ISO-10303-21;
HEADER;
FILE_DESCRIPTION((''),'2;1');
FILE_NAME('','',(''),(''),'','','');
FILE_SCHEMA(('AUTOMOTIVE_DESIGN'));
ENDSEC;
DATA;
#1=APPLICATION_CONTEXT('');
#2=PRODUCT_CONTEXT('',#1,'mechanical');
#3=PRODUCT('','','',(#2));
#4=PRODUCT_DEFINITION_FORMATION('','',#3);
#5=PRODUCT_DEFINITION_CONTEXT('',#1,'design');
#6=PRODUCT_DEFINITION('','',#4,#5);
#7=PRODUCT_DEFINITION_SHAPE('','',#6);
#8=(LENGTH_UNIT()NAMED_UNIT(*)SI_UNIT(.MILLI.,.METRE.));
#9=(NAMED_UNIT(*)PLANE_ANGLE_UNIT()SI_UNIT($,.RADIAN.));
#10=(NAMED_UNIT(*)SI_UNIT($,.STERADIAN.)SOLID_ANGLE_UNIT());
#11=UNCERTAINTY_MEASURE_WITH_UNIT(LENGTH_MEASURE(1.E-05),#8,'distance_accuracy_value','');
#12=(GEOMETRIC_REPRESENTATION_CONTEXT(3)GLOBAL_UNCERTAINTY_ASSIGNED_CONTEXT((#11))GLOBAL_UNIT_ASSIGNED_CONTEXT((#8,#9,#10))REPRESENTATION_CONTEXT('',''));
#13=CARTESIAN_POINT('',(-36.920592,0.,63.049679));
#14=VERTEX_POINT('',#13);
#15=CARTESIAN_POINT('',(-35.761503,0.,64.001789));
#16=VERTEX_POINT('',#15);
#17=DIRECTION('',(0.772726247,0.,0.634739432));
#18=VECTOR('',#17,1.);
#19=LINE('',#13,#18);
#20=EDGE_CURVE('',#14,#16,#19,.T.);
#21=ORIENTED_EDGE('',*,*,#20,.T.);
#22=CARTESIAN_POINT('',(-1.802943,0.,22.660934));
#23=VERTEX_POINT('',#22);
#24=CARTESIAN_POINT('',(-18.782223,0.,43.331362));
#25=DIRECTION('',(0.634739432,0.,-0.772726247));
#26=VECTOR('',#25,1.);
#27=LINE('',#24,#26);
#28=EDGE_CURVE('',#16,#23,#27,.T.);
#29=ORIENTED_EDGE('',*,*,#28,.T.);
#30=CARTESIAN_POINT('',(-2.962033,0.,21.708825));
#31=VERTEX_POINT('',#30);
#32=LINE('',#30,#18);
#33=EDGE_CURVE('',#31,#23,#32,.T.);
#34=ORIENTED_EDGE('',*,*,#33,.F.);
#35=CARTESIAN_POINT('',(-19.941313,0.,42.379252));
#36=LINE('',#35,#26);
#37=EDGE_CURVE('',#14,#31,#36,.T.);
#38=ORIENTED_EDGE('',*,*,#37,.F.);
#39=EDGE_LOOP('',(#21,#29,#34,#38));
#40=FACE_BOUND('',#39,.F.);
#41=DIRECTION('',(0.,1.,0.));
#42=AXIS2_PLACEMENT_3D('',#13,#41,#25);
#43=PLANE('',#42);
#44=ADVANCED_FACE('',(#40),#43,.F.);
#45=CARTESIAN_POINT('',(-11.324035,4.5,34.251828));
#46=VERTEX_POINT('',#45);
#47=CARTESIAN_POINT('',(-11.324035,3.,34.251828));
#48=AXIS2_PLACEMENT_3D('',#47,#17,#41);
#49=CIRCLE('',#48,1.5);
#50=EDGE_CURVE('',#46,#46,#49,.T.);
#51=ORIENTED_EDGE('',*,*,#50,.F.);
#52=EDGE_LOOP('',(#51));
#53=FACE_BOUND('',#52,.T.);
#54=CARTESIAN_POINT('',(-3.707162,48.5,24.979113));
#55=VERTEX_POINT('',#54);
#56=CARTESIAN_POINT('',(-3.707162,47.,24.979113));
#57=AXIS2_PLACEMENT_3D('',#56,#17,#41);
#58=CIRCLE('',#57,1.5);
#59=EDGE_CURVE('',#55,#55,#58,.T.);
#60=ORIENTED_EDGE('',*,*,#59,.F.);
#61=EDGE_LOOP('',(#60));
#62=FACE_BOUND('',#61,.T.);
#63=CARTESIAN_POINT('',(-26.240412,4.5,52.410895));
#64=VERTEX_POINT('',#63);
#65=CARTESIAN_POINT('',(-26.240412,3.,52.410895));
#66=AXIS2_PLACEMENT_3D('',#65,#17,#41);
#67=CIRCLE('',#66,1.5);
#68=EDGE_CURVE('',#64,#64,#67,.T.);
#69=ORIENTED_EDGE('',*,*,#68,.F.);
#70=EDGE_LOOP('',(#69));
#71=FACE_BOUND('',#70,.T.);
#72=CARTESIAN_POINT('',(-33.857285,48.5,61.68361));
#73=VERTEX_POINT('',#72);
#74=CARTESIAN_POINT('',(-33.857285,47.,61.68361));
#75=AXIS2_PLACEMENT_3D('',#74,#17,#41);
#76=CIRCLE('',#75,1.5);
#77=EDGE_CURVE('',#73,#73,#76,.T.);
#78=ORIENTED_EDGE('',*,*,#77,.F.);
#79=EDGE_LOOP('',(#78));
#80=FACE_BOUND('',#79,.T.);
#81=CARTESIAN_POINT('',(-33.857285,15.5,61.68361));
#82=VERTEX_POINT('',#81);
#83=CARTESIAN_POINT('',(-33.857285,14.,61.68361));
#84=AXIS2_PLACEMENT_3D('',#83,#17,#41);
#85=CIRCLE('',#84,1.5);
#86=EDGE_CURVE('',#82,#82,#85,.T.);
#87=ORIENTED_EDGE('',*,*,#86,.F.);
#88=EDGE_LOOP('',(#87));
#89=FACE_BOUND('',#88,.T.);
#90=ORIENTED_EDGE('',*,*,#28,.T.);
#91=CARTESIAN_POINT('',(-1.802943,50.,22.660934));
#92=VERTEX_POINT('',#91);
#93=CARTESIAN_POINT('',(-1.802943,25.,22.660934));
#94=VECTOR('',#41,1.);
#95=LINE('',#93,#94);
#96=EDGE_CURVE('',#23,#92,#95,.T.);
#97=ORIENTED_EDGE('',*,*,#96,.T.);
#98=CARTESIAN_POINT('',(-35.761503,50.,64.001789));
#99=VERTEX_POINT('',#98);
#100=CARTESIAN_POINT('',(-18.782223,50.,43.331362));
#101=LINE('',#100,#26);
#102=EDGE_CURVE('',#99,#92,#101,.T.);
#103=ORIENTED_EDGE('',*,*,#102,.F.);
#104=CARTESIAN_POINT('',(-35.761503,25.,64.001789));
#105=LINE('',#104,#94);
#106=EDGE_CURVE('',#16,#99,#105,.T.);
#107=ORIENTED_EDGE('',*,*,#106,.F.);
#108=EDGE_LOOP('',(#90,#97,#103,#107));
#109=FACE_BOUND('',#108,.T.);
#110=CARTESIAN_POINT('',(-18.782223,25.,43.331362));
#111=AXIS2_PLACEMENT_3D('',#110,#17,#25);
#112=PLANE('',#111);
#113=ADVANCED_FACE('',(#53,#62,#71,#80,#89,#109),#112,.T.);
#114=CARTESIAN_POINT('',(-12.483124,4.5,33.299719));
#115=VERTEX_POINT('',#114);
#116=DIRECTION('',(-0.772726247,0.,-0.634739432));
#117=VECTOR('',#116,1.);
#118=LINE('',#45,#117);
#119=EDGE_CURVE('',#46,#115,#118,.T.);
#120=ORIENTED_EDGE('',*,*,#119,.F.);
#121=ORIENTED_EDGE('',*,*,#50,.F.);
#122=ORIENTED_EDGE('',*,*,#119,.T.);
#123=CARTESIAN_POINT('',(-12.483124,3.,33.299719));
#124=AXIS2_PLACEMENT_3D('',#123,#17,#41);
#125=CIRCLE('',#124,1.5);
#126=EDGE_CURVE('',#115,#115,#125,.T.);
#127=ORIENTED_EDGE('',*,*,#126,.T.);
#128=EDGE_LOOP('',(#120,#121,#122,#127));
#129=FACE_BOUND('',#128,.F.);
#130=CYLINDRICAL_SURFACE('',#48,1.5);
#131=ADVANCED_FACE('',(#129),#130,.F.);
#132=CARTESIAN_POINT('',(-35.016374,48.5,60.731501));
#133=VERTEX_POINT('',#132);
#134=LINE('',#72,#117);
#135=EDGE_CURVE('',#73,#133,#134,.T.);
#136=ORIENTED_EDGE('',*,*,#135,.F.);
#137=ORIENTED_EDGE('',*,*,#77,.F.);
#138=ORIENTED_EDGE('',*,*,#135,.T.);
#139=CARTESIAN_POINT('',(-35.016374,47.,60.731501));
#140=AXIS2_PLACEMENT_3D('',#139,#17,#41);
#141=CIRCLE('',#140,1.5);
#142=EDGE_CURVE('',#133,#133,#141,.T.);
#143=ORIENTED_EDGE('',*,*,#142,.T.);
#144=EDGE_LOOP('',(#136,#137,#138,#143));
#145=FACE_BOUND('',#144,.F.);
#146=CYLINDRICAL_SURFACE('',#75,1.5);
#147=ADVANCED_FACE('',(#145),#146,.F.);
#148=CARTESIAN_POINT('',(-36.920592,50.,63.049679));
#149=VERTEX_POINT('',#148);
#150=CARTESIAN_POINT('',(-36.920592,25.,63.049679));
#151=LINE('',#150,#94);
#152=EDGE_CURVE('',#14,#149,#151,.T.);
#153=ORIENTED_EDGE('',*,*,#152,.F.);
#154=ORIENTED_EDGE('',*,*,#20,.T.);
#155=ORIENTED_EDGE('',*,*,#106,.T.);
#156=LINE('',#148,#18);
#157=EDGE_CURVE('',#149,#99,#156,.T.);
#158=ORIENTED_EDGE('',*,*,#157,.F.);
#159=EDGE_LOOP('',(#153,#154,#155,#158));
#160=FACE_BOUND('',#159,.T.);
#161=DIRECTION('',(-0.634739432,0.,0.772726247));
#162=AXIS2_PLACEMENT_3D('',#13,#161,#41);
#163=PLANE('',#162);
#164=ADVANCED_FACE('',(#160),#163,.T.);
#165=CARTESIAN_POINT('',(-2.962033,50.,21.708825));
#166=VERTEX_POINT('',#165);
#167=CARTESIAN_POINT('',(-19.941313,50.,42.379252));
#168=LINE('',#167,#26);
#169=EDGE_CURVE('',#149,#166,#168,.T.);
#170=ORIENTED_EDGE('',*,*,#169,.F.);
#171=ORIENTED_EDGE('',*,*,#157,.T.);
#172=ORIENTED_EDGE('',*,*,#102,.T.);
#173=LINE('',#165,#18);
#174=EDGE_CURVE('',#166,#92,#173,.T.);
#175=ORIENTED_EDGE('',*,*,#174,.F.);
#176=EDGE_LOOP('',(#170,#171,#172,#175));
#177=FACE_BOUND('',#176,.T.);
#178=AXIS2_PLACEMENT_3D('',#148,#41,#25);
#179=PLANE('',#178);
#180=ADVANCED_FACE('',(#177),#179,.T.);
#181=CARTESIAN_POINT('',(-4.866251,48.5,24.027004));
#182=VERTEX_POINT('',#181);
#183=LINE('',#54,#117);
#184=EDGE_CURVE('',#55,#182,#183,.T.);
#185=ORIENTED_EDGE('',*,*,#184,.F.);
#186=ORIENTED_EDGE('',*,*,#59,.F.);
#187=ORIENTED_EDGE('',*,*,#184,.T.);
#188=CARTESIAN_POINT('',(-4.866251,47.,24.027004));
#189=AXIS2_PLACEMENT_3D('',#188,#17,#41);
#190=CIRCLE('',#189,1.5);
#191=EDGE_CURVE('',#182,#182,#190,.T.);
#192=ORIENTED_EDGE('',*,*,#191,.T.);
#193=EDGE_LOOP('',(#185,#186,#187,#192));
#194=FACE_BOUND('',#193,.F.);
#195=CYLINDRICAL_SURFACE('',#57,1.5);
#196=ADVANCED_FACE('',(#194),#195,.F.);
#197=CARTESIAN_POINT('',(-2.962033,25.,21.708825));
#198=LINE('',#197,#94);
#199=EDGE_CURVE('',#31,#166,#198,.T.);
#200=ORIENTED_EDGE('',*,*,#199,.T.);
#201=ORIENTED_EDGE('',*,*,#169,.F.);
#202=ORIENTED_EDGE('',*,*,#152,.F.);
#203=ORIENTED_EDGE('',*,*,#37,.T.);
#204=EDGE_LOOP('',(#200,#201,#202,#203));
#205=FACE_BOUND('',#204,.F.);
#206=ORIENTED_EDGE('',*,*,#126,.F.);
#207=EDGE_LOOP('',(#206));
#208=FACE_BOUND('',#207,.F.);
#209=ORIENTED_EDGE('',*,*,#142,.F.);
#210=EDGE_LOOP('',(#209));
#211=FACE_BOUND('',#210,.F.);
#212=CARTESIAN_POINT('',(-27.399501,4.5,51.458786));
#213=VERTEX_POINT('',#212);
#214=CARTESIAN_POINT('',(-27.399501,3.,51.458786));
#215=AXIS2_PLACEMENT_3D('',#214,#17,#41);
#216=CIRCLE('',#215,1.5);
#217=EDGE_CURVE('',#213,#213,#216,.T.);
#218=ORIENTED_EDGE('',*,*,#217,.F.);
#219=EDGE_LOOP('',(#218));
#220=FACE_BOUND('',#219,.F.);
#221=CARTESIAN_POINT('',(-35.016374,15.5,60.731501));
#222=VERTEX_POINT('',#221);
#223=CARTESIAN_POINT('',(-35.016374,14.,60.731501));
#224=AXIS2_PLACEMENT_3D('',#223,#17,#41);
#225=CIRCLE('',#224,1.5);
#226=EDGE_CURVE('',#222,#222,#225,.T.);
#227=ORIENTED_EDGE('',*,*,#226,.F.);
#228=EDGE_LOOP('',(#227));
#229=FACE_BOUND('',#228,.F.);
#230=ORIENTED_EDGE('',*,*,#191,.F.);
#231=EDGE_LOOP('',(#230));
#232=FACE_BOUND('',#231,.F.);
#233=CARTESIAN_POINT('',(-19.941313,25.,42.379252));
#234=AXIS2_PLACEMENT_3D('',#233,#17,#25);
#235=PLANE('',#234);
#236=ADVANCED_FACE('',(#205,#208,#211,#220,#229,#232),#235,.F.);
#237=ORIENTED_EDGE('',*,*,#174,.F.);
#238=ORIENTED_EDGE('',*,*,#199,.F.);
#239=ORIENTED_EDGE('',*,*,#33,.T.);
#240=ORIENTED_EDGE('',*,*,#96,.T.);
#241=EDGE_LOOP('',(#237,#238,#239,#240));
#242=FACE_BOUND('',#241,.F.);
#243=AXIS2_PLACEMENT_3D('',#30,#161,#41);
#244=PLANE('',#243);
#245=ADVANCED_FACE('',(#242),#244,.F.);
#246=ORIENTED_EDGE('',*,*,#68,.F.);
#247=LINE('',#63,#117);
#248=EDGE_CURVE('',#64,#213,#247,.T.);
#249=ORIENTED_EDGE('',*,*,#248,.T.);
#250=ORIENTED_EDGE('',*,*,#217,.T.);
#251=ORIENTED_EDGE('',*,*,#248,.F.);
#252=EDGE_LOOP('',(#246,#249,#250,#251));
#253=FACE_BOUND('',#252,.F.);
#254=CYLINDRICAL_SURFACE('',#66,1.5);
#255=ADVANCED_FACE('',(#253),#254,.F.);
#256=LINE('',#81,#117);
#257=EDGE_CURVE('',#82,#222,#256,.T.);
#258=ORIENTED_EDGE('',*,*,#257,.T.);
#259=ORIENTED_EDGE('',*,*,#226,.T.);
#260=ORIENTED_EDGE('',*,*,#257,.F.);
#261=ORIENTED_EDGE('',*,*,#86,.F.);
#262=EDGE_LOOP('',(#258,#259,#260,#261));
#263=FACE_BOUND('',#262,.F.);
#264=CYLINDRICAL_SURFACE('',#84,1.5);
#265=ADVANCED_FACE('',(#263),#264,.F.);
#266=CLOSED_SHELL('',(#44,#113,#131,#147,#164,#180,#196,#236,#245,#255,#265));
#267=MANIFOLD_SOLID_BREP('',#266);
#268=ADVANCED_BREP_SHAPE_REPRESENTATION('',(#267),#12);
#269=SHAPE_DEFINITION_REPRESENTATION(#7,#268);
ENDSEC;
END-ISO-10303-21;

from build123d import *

# Parameters (mm, degrees)
F1_E1_W  = 53.5
F1_E1_H  = 50
F2_DEPTH = 1.5
F3_R     = 1.5
F4_DEPTH = 25


with BuildPart() as f2:
    # F1_E1 (on explicit) → F2 (new body)
    with BuildSketch(Plane(origin=(-36.9205923892, 0, 63.0496794862), x_dir=(0.6347394323, 0, -0.7727262472), z_dir=(0.7727262472, 0, 0.6347394323))):
        with Locations((26.75, 25)):
            Rectangle(F1_E1_W, F1_E1_H)
    extrude(amount=F2_DEPTH)

    # F3 (on face) → F4 (cut)
    with BuildSketch(Plane(origin=(10.0381829655, 0, 8.245650487), x_dir=(0, 1, 0), z_dir=(0.7727262472, 0, 0.6347394323))):
        with Locations((3, 57.1550980691)):
            Circle(F3_R)
        with Locations((3, 33.6550980691)):
            Circle(F3_R)
        with Locations((47, 69.1550980691)):
            Circle(F3_R)
        with Locations((47, 21.6550980691)):
            Circle(F3_R)
        with Locations((14, 69.1550980691)):
            Circle(F3_R)
    extrude(amount=-F4_DEPTH, mode=Mode.SUBTRACT)


solid = f2.part
